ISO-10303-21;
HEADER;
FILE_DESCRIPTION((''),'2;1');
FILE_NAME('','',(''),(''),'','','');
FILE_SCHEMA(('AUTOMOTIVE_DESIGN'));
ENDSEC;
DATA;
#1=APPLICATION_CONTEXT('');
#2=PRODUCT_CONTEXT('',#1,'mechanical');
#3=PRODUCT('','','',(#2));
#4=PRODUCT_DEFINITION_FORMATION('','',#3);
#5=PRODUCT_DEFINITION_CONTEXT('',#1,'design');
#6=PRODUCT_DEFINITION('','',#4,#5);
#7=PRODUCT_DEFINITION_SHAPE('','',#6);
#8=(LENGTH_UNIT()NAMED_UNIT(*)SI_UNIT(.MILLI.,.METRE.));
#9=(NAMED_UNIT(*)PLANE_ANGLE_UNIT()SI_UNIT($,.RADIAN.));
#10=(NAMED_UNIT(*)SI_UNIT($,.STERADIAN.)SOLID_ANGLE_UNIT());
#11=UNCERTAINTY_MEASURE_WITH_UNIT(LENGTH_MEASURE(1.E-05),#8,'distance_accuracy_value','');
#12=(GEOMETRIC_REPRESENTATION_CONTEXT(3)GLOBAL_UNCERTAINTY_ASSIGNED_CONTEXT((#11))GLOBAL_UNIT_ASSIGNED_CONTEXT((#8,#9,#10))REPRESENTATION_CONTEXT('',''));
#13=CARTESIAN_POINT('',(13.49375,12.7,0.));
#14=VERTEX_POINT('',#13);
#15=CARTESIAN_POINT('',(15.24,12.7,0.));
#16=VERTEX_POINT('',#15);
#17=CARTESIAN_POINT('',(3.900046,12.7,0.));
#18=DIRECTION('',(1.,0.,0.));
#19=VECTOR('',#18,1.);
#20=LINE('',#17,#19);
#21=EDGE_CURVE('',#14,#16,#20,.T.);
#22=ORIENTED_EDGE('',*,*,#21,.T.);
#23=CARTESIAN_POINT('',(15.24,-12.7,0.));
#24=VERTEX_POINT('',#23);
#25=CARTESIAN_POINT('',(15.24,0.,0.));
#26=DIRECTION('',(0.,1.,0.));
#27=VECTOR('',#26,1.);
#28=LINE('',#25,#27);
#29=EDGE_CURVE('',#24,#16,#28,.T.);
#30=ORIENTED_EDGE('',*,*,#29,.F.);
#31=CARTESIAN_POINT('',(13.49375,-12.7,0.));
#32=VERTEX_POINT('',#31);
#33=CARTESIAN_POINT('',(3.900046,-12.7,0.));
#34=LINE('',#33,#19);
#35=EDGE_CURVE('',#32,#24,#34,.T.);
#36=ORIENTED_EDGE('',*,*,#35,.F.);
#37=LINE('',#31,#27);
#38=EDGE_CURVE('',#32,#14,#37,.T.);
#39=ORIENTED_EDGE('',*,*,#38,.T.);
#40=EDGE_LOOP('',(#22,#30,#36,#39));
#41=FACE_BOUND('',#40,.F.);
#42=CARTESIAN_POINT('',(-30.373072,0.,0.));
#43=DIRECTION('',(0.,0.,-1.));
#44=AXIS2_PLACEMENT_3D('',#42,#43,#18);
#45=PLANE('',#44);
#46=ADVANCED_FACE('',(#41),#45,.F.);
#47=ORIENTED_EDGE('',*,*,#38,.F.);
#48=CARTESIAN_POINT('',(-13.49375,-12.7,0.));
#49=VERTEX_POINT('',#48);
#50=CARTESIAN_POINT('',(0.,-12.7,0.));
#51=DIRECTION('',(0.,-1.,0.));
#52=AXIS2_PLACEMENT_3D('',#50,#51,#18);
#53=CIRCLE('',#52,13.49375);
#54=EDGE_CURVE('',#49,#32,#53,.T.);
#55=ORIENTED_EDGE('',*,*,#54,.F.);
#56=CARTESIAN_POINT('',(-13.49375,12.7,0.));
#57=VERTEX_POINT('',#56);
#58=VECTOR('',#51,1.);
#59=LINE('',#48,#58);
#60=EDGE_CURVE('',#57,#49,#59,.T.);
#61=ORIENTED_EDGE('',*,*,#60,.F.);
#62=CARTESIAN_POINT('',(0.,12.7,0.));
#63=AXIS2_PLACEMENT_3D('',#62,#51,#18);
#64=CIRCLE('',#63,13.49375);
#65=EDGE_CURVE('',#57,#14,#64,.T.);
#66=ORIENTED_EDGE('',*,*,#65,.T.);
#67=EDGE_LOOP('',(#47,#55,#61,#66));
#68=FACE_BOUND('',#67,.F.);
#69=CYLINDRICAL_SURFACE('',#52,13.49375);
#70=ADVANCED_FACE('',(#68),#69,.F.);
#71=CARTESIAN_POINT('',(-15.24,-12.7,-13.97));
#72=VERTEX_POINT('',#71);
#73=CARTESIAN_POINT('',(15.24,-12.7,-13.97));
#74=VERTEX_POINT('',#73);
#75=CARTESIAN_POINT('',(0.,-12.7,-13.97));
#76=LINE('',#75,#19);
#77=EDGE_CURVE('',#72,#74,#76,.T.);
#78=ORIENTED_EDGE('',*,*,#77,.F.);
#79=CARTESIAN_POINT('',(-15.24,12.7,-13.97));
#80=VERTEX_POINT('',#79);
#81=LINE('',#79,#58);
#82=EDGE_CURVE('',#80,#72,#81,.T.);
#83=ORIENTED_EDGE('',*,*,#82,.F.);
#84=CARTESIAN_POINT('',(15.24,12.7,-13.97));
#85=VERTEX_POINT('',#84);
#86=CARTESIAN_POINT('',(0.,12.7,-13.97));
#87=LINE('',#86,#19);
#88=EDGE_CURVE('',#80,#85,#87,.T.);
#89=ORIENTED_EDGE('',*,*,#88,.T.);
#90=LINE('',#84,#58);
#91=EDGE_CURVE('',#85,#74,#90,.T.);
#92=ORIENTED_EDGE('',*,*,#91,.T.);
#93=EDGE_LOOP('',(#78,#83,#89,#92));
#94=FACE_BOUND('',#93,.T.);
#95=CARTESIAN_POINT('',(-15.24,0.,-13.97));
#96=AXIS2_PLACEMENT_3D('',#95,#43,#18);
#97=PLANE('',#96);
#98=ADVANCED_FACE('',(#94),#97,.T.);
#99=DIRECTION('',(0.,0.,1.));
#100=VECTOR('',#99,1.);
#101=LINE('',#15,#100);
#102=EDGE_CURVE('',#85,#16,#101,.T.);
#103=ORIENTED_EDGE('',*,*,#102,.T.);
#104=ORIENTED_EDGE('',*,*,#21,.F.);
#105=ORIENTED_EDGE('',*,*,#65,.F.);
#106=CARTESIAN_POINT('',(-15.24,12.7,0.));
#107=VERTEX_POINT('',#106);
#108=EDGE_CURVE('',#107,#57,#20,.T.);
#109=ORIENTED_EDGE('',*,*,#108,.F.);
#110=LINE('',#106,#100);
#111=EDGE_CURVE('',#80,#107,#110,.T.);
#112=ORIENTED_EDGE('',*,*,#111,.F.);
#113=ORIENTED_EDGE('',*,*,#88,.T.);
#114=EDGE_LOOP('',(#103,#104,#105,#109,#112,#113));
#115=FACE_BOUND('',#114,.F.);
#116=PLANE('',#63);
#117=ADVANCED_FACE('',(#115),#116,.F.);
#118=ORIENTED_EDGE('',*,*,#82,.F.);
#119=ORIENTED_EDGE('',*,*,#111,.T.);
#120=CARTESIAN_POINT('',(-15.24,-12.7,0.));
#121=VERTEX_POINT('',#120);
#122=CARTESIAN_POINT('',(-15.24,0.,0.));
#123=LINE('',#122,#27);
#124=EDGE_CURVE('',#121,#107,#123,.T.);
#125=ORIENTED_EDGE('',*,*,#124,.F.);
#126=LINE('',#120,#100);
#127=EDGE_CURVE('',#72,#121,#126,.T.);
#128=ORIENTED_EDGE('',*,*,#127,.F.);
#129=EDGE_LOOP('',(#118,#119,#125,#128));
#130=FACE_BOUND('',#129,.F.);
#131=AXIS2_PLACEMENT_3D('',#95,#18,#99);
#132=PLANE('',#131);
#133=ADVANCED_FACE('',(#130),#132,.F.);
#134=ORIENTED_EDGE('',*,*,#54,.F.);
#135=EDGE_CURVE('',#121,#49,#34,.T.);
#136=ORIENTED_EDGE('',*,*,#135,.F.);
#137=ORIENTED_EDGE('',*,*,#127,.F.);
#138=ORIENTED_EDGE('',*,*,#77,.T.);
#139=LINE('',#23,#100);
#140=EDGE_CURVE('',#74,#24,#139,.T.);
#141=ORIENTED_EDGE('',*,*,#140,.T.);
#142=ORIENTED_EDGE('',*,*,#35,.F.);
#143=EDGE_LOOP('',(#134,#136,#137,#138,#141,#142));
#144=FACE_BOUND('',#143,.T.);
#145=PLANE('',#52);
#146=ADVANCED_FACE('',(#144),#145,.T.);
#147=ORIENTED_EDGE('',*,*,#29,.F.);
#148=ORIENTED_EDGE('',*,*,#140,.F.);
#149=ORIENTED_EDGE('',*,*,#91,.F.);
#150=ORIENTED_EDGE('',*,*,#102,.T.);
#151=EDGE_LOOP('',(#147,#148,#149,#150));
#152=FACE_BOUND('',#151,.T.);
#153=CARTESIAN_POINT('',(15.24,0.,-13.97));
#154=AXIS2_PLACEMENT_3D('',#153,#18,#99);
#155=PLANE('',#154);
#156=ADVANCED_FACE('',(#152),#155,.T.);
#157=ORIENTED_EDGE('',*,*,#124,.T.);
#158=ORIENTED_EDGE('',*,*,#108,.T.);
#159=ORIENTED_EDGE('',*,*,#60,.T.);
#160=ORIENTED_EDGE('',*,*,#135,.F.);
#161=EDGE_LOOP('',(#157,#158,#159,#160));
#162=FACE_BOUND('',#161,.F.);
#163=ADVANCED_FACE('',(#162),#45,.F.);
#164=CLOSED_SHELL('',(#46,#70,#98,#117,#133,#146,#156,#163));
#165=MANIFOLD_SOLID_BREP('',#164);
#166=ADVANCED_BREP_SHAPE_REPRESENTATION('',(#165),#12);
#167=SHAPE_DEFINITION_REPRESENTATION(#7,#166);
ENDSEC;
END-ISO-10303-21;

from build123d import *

# Parameters (mm, degrees)
F0_W     = 30.48
F0_H     = 27.94
F1_DEPTH = 12.7
F2_R     = 13.49375
F3_DEPTH = 25.4
F4_W     = 68.546237424
F4_H     = 31.4367190003
F5_DEPTH = 12.7


with BuildPart() as f1:
    # F0 (on Front) → F1 (new body, symmetric)
    with BuildSketch(Plane.XZ):
        Rectangle(F0_W, F0_H)
    extrude(amount=F1_DEPTH, both=True)

    # F2 (on face) → F3 (cut)
    with BuildSketch(Plane.XZ.offset(12.7)):
        Circle(F2_R)
    extrude(amount=-F3_DEPTH, mode=Mode.SUBTRACT)

    # F4 (on Front) → F5 (cut, symmetric)
    with BuildSketch(Plane.XZ):
        with Locations((3.9000464603, 15.7183595002)):
            Rectangle(F4_W, F4_H)
    extrude(amount=F5_DEPTH, both=True, mode=Mode.SUBTRACT)


solid = f1.part
